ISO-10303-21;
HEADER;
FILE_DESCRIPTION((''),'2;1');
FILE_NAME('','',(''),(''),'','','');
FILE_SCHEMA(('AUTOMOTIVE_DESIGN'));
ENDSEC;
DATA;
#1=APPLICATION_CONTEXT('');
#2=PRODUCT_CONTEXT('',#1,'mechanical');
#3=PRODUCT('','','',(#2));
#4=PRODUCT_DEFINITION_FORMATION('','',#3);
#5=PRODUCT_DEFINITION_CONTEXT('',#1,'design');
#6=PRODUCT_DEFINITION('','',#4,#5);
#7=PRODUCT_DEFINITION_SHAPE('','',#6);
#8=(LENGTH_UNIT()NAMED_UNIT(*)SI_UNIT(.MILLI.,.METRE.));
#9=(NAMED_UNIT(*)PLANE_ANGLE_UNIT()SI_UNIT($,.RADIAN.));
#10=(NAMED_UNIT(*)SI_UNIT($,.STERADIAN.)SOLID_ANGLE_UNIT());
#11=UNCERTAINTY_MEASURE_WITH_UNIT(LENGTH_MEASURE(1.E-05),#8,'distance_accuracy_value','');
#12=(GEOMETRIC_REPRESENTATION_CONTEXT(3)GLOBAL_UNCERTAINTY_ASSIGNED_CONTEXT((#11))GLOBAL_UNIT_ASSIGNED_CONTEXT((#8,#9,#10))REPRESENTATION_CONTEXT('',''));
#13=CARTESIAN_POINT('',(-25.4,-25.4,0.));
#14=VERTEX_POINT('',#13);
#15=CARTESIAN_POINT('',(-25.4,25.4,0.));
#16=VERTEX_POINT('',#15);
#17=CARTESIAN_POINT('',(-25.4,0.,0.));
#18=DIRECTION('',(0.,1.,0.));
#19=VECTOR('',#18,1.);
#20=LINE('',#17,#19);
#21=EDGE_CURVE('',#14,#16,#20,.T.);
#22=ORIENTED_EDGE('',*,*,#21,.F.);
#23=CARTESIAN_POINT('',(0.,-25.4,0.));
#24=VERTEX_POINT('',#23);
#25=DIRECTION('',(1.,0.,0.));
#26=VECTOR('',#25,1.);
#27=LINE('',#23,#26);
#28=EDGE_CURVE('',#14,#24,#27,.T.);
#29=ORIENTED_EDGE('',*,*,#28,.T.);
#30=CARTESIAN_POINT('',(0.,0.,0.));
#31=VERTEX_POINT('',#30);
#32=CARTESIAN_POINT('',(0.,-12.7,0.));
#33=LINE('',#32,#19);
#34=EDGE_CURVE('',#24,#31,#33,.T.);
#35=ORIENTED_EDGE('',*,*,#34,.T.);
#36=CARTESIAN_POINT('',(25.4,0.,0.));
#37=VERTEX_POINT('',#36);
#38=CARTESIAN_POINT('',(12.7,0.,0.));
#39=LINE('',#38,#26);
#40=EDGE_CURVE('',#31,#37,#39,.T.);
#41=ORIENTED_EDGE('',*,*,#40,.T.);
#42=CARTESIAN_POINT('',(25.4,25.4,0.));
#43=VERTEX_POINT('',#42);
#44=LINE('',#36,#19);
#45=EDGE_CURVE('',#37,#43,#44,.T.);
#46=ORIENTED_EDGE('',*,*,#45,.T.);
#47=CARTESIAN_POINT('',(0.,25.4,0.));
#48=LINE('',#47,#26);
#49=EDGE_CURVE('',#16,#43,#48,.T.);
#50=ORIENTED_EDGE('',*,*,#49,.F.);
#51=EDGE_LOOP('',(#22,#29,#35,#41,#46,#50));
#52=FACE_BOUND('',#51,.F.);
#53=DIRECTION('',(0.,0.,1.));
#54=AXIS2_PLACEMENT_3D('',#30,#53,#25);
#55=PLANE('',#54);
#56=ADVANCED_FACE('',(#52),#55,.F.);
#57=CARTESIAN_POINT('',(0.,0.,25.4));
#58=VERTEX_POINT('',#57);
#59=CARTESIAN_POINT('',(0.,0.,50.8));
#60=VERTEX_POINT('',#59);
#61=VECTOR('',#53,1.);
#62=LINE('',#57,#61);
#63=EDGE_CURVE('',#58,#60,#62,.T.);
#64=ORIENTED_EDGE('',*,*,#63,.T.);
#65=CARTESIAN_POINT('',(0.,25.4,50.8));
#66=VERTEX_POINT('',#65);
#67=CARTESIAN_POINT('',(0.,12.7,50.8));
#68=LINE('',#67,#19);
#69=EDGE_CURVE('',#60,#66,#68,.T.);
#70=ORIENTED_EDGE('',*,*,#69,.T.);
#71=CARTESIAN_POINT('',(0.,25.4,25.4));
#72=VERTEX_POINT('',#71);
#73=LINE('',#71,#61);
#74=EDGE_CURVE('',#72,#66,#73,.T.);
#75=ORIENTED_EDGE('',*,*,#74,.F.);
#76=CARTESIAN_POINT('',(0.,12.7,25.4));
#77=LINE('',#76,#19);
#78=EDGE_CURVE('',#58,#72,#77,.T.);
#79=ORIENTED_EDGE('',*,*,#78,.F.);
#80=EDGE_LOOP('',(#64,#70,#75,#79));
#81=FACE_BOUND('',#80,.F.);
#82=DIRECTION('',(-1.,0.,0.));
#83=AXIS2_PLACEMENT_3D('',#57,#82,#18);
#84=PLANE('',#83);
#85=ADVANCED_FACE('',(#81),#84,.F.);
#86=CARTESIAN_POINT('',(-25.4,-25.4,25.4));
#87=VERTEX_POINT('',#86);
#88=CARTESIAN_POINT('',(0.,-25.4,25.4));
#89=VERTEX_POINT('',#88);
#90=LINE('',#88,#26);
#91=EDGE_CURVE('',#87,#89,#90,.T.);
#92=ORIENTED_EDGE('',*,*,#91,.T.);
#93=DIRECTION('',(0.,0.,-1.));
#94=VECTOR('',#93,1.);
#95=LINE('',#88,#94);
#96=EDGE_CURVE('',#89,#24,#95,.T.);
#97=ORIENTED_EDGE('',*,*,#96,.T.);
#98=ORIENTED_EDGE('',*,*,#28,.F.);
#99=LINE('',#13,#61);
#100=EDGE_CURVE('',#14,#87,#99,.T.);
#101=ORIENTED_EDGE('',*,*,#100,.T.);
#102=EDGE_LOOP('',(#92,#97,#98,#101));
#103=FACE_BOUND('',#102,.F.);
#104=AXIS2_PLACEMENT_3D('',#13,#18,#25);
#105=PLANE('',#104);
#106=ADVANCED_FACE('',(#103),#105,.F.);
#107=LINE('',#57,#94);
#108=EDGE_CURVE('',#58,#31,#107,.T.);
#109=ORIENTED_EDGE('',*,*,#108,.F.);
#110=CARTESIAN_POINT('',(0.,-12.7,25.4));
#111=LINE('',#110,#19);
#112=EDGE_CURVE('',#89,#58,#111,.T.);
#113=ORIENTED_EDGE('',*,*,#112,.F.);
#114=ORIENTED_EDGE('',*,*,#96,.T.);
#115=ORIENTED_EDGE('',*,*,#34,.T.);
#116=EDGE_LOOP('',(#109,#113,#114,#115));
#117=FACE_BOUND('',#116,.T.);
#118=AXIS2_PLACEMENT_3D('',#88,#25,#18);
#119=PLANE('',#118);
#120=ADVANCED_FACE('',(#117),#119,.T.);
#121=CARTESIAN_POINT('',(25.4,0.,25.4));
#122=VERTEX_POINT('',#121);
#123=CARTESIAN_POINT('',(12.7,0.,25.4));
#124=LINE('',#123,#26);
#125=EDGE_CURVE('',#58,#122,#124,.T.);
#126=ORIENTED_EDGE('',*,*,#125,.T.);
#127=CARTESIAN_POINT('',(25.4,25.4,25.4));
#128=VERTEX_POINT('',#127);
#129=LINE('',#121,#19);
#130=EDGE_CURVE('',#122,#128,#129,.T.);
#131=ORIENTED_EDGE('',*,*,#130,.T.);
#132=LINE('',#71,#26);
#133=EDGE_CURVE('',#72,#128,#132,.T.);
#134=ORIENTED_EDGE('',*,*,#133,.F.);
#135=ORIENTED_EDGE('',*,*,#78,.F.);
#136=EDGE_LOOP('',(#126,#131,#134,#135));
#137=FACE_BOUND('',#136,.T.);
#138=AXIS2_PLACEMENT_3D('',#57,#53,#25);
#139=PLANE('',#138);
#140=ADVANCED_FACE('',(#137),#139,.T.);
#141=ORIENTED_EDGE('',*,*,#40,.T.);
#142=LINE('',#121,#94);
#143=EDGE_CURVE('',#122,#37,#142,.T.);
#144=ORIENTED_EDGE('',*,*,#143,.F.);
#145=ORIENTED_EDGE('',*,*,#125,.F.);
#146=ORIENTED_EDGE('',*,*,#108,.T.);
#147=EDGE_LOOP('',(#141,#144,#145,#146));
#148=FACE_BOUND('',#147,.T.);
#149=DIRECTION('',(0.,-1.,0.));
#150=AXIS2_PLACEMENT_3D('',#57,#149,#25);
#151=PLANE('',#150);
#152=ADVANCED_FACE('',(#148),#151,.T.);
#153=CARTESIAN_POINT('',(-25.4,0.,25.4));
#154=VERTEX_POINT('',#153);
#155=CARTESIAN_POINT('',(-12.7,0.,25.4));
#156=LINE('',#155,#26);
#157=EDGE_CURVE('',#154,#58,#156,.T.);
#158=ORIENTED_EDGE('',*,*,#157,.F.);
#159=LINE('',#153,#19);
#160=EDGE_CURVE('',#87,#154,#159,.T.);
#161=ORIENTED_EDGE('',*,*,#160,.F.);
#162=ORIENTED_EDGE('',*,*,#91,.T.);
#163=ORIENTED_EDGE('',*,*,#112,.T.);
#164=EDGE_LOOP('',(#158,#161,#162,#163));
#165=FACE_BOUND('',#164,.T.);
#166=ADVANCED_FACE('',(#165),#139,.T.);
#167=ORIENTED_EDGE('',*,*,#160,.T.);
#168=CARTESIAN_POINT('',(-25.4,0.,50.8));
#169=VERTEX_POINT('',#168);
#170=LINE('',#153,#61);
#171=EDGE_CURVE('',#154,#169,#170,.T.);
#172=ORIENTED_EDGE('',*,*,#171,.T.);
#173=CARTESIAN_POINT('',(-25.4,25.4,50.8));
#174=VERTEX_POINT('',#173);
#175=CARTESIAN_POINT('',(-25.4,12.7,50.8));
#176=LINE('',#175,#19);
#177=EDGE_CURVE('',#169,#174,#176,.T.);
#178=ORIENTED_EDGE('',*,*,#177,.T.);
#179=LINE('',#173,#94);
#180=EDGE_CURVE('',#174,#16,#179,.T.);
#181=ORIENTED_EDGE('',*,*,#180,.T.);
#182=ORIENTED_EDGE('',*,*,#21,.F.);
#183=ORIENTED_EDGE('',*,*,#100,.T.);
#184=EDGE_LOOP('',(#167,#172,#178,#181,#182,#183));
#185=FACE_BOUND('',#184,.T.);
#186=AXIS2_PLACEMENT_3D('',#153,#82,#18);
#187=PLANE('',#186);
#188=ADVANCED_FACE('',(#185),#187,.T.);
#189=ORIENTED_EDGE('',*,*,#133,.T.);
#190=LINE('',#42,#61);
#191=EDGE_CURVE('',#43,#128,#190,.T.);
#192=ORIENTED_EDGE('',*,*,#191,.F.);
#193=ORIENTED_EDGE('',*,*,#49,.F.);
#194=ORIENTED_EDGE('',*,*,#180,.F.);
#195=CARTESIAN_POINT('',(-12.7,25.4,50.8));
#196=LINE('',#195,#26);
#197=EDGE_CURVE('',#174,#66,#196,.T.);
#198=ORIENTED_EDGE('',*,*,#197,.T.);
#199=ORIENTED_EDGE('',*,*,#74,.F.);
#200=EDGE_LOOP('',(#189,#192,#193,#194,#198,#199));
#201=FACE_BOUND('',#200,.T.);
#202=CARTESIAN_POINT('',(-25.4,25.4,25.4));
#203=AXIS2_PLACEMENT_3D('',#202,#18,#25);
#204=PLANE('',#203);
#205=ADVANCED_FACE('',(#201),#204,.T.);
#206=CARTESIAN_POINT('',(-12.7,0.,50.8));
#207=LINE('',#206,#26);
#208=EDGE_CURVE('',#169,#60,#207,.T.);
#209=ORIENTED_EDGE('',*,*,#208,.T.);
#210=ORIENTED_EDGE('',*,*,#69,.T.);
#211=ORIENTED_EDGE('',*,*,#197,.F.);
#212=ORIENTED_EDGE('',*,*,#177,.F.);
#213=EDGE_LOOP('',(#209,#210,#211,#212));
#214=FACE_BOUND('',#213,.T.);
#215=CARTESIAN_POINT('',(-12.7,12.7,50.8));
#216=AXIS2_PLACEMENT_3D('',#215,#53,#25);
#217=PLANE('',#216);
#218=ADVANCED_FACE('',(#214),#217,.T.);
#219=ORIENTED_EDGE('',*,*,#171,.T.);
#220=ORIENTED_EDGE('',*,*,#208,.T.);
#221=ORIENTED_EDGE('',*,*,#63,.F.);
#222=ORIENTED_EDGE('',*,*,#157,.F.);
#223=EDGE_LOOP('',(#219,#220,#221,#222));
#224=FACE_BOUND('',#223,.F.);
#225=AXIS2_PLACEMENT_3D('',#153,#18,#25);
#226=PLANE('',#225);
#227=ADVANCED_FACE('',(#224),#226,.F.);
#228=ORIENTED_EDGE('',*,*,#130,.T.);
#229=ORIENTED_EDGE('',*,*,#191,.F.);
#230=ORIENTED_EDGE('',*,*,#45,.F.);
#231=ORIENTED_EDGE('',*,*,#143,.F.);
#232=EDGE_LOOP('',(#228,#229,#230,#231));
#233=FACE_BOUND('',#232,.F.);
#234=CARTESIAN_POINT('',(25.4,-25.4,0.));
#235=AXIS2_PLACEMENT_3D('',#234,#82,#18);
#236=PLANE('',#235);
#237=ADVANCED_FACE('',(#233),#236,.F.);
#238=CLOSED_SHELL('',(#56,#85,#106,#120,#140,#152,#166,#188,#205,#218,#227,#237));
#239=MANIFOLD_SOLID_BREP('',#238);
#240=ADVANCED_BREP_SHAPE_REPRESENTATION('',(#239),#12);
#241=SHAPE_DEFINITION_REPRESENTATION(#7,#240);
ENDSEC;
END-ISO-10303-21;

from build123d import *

# Parameters (mm, degrees)
F1_W     = 50.8
F1_H     = 50.8
F2_DEPTH = 25.4
F3_W     = 25.4
F3_H     = 25.4
F4_DEPTH = 25.4
F5_W     = 25.4
F5_H     = 25.4
F6_DEPTH = 25.4


# Not quite as in the source:
# - a variable given as a bare number and used for a length is read in inches; the dataset says mm whatever the document's units were


with BuildPart() as f2:
    # F1 (on Top) → F2 (new body)
    with BuildSketch(Plane.XY):
        Rectangle(F1_W, F1_H)
    extrude(amount=F2_DEPTH)

    # F3 (on face) → F4 (cut)
    with BuildSketch(Plane.XY.offset(25.4)):
        with Locations((12.7, -12.7)):
            Rectangle(F3_W, F3_H)
    extrude(amount=-F4_DEPTH, mode=Mode.SUBTRACT)

    # F5 (on face) → F6 (join)
    with BuildSketch(Plane.XY.offset(25.4)):
        with Locations((-12.7, 12.7)):
            Rectangle(F5_W, F5_H)
    extrude(amount=F6_DEPTH)


solid = f2.part
